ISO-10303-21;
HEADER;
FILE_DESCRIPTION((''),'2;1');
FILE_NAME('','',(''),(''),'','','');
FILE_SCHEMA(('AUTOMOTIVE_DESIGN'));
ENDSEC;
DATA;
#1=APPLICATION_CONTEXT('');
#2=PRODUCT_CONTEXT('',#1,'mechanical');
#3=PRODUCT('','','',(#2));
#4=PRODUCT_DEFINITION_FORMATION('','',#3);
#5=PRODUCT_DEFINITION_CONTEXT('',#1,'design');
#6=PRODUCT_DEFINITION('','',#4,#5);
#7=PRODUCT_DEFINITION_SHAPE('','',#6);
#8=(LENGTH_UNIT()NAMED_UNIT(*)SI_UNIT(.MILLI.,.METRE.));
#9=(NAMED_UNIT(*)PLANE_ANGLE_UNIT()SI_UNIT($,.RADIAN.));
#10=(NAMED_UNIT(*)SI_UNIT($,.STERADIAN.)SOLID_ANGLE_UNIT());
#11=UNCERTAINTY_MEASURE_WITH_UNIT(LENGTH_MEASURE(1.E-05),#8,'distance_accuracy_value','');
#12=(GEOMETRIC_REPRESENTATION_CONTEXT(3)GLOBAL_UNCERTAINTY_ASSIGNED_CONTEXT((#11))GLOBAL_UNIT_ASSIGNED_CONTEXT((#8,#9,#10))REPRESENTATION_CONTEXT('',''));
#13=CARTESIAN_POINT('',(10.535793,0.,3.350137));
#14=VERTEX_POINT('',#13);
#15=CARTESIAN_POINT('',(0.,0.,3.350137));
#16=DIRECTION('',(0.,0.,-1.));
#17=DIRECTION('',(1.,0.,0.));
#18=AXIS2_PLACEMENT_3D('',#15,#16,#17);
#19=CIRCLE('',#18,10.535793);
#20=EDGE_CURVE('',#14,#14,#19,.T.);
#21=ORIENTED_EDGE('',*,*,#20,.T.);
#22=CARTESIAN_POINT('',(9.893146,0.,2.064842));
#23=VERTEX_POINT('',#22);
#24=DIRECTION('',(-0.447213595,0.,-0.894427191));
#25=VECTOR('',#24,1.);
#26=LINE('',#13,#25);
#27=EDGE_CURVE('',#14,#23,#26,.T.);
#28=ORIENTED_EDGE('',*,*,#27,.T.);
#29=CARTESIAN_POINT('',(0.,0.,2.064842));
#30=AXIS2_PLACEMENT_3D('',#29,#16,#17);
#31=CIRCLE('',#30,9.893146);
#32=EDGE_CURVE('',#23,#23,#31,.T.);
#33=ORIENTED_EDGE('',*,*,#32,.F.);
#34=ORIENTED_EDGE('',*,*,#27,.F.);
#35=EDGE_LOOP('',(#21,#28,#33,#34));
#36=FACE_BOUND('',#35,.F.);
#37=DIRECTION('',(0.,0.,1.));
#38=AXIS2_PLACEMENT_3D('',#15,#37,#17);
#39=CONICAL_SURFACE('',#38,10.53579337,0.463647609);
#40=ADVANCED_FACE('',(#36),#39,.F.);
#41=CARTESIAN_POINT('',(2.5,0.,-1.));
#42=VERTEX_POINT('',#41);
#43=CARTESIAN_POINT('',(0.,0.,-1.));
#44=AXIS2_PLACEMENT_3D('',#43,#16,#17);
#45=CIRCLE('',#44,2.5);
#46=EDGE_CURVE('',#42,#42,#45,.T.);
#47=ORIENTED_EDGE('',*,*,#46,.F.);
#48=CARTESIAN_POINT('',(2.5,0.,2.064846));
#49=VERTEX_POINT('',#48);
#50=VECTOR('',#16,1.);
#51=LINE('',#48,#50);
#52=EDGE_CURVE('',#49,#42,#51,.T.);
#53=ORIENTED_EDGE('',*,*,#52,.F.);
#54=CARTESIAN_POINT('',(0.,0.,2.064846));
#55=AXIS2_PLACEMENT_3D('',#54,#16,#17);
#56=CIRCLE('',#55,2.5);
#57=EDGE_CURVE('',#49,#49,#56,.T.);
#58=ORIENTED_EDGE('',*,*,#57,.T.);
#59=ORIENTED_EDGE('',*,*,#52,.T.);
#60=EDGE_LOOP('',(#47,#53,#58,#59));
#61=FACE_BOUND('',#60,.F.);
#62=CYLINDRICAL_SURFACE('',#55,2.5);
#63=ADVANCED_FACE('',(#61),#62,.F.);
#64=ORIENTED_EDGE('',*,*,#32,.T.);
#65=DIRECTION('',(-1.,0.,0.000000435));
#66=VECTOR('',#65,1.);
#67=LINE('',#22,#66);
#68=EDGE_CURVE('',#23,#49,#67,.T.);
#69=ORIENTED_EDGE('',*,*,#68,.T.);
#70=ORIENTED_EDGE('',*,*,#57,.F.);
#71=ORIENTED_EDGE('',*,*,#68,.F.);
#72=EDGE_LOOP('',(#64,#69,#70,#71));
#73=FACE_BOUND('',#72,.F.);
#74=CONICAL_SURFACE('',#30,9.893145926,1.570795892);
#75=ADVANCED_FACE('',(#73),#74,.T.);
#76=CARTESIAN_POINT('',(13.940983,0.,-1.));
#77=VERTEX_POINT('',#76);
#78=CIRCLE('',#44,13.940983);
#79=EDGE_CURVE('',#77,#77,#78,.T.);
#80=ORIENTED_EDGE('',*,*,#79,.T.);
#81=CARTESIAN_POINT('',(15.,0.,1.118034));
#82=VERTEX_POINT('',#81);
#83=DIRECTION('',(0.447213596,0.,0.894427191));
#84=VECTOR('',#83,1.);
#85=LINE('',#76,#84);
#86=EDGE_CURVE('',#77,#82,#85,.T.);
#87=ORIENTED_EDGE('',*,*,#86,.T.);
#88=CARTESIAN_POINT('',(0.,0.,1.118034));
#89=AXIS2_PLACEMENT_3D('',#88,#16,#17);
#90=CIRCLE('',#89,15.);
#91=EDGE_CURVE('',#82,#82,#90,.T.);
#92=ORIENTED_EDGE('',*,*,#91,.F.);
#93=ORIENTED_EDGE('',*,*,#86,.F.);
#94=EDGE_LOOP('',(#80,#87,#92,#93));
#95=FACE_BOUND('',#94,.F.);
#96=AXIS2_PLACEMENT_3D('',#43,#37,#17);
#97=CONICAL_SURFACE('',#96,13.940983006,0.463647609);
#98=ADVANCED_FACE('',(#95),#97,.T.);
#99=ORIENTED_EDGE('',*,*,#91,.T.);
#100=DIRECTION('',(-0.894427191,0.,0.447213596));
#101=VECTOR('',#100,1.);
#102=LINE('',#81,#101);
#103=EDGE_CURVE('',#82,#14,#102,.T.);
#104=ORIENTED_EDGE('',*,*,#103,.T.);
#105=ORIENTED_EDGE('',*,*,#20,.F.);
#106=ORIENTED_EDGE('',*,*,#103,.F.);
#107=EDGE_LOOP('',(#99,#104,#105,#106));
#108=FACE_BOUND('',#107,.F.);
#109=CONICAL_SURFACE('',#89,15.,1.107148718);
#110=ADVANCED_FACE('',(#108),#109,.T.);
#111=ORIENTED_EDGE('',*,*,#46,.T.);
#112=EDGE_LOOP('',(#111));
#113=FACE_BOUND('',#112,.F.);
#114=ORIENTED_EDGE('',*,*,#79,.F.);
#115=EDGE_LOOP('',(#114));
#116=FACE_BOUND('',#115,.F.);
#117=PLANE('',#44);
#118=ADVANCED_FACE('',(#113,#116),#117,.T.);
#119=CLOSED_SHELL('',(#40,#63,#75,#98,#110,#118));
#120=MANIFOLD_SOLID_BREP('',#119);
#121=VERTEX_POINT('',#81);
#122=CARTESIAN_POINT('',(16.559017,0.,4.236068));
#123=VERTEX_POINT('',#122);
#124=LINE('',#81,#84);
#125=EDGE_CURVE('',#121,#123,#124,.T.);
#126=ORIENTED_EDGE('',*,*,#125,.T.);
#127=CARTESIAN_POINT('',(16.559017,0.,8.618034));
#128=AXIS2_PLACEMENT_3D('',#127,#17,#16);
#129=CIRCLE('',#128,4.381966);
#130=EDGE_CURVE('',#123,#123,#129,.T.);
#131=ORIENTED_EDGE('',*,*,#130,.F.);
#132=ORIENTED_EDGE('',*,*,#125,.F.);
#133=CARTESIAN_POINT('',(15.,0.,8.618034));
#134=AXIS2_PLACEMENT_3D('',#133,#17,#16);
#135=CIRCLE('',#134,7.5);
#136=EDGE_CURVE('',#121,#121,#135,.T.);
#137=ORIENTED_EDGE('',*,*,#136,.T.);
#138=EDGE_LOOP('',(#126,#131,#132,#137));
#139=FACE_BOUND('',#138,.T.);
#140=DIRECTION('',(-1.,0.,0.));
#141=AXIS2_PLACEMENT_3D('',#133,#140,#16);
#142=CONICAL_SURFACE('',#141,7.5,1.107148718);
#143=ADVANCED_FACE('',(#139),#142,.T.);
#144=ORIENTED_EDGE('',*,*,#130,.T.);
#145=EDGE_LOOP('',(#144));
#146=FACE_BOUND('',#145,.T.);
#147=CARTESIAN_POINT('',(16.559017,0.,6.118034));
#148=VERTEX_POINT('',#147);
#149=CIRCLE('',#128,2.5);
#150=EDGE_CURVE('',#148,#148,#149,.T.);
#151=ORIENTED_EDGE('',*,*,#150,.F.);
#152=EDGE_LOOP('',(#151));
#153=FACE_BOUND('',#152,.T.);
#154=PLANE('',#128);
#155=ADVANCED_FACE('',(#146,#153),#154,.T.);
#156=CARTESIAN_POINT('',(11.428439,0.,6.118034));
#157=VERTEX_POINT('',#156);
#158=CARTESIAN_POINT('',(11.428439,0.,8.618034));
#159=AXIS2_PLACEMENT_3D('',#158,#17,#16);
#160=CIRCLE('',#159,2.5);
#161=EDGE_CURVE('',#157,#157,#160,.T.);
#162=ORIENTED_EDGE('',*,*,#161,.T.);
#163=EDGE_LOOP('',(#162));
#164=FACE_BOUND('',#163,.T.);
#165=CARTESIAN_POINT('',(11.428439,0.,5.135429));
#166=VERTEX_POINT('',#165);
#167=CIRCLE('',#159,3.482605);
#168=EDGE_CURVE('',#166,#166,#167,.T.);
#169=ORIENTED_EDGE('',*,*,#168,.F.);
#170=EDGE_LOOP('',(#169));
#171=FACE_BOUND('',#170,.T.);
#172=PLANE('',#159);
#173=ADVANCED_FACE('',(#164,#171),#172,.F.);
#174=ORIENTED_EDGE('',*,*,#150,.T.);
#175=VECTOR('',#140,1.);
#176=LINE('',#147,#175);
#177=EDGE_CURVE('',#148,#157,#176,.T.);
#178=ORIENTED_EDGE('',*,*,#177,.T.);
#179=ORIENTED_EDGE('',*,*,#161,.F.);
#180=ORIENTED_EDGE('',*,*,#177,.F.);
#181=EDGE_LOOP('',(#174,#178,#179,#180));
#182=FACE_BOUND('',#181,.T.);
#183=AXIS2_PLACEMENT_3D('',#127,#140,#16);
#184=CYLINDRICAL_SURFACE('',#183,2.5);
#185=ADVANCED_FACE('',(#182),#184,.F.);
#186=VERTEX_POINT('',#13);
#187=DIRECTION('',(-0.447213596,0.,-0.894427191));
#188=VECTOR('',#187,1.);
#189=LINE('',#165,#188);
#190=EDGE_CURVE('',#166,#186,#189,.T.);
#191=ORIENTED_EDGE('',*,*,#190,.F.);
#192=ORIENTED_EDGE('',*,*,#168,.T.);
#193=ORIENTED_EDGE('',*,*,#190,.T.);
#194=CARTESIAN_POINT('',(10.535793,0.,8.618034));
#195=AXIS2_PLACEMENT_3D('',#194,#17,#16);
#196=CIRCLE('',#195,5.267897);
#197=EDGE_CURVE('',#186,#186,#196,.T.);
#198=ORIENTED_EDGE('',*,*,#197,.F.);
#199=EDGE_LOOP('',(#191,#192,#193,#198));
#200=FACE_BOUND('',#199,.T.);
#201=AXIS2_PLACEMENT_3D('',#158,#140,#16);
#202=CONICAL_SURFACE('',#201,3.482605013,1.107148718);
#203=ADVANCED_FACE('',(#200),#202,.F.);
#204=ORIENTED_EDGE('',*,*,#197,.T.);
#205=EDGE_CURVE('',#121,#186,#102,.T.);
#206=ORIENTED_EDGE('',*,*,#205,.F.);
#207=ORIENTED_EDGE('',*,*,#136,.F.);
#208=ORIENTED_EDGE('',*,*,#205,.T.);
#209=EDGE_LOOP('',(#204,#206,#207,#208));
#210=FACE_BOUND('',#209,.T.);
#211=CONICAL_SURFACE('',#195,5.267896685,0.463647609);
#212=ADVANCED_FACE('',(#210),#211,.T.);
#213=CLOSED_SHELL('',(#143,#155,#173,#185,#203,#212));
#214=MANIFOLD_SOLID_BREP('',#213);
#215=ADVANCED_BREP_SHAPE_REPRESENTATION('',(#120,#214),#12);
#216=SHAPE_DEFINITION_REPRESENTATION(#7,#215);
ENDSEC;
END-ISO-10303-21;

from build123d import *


# Not quite as in the source:
# - ends of sketch curves that miss each other by under 0.0002 mm in the source are joined


with BuildPart() as f2:
    # F1 (on Front) → F2 (revolve)
    with BuildSketch(Plane.XZ):
        Polygon((10.5357933703, 3.3501373036), (9.8931459258, 2.0648424145), (2.5, 2.0648456312), (2.5, -1), (13.9409830056, -1), (15, 1.1180339887), align=None)
    revolve(axis=Axis((0, 0, 3.0726052355), (0, 0, -1)))

    # F4 (on Front) → F5 (revolve)
    with BuildSketch(Plane.XZ):
        Polygon((11.4284392065, 6.1180339887), (11.4284392065, 5.135428976), (10.5357933703, 3.3501373036), (15, 1.1180339887), (16.5590169944, 4.2360679775), (16.5590169944, 6.1180339887), align=None)
    revolve(axis=Axis((9.5441560864, 0, 8.6180339887), (1, 0, 0)))


solid = f2.part
